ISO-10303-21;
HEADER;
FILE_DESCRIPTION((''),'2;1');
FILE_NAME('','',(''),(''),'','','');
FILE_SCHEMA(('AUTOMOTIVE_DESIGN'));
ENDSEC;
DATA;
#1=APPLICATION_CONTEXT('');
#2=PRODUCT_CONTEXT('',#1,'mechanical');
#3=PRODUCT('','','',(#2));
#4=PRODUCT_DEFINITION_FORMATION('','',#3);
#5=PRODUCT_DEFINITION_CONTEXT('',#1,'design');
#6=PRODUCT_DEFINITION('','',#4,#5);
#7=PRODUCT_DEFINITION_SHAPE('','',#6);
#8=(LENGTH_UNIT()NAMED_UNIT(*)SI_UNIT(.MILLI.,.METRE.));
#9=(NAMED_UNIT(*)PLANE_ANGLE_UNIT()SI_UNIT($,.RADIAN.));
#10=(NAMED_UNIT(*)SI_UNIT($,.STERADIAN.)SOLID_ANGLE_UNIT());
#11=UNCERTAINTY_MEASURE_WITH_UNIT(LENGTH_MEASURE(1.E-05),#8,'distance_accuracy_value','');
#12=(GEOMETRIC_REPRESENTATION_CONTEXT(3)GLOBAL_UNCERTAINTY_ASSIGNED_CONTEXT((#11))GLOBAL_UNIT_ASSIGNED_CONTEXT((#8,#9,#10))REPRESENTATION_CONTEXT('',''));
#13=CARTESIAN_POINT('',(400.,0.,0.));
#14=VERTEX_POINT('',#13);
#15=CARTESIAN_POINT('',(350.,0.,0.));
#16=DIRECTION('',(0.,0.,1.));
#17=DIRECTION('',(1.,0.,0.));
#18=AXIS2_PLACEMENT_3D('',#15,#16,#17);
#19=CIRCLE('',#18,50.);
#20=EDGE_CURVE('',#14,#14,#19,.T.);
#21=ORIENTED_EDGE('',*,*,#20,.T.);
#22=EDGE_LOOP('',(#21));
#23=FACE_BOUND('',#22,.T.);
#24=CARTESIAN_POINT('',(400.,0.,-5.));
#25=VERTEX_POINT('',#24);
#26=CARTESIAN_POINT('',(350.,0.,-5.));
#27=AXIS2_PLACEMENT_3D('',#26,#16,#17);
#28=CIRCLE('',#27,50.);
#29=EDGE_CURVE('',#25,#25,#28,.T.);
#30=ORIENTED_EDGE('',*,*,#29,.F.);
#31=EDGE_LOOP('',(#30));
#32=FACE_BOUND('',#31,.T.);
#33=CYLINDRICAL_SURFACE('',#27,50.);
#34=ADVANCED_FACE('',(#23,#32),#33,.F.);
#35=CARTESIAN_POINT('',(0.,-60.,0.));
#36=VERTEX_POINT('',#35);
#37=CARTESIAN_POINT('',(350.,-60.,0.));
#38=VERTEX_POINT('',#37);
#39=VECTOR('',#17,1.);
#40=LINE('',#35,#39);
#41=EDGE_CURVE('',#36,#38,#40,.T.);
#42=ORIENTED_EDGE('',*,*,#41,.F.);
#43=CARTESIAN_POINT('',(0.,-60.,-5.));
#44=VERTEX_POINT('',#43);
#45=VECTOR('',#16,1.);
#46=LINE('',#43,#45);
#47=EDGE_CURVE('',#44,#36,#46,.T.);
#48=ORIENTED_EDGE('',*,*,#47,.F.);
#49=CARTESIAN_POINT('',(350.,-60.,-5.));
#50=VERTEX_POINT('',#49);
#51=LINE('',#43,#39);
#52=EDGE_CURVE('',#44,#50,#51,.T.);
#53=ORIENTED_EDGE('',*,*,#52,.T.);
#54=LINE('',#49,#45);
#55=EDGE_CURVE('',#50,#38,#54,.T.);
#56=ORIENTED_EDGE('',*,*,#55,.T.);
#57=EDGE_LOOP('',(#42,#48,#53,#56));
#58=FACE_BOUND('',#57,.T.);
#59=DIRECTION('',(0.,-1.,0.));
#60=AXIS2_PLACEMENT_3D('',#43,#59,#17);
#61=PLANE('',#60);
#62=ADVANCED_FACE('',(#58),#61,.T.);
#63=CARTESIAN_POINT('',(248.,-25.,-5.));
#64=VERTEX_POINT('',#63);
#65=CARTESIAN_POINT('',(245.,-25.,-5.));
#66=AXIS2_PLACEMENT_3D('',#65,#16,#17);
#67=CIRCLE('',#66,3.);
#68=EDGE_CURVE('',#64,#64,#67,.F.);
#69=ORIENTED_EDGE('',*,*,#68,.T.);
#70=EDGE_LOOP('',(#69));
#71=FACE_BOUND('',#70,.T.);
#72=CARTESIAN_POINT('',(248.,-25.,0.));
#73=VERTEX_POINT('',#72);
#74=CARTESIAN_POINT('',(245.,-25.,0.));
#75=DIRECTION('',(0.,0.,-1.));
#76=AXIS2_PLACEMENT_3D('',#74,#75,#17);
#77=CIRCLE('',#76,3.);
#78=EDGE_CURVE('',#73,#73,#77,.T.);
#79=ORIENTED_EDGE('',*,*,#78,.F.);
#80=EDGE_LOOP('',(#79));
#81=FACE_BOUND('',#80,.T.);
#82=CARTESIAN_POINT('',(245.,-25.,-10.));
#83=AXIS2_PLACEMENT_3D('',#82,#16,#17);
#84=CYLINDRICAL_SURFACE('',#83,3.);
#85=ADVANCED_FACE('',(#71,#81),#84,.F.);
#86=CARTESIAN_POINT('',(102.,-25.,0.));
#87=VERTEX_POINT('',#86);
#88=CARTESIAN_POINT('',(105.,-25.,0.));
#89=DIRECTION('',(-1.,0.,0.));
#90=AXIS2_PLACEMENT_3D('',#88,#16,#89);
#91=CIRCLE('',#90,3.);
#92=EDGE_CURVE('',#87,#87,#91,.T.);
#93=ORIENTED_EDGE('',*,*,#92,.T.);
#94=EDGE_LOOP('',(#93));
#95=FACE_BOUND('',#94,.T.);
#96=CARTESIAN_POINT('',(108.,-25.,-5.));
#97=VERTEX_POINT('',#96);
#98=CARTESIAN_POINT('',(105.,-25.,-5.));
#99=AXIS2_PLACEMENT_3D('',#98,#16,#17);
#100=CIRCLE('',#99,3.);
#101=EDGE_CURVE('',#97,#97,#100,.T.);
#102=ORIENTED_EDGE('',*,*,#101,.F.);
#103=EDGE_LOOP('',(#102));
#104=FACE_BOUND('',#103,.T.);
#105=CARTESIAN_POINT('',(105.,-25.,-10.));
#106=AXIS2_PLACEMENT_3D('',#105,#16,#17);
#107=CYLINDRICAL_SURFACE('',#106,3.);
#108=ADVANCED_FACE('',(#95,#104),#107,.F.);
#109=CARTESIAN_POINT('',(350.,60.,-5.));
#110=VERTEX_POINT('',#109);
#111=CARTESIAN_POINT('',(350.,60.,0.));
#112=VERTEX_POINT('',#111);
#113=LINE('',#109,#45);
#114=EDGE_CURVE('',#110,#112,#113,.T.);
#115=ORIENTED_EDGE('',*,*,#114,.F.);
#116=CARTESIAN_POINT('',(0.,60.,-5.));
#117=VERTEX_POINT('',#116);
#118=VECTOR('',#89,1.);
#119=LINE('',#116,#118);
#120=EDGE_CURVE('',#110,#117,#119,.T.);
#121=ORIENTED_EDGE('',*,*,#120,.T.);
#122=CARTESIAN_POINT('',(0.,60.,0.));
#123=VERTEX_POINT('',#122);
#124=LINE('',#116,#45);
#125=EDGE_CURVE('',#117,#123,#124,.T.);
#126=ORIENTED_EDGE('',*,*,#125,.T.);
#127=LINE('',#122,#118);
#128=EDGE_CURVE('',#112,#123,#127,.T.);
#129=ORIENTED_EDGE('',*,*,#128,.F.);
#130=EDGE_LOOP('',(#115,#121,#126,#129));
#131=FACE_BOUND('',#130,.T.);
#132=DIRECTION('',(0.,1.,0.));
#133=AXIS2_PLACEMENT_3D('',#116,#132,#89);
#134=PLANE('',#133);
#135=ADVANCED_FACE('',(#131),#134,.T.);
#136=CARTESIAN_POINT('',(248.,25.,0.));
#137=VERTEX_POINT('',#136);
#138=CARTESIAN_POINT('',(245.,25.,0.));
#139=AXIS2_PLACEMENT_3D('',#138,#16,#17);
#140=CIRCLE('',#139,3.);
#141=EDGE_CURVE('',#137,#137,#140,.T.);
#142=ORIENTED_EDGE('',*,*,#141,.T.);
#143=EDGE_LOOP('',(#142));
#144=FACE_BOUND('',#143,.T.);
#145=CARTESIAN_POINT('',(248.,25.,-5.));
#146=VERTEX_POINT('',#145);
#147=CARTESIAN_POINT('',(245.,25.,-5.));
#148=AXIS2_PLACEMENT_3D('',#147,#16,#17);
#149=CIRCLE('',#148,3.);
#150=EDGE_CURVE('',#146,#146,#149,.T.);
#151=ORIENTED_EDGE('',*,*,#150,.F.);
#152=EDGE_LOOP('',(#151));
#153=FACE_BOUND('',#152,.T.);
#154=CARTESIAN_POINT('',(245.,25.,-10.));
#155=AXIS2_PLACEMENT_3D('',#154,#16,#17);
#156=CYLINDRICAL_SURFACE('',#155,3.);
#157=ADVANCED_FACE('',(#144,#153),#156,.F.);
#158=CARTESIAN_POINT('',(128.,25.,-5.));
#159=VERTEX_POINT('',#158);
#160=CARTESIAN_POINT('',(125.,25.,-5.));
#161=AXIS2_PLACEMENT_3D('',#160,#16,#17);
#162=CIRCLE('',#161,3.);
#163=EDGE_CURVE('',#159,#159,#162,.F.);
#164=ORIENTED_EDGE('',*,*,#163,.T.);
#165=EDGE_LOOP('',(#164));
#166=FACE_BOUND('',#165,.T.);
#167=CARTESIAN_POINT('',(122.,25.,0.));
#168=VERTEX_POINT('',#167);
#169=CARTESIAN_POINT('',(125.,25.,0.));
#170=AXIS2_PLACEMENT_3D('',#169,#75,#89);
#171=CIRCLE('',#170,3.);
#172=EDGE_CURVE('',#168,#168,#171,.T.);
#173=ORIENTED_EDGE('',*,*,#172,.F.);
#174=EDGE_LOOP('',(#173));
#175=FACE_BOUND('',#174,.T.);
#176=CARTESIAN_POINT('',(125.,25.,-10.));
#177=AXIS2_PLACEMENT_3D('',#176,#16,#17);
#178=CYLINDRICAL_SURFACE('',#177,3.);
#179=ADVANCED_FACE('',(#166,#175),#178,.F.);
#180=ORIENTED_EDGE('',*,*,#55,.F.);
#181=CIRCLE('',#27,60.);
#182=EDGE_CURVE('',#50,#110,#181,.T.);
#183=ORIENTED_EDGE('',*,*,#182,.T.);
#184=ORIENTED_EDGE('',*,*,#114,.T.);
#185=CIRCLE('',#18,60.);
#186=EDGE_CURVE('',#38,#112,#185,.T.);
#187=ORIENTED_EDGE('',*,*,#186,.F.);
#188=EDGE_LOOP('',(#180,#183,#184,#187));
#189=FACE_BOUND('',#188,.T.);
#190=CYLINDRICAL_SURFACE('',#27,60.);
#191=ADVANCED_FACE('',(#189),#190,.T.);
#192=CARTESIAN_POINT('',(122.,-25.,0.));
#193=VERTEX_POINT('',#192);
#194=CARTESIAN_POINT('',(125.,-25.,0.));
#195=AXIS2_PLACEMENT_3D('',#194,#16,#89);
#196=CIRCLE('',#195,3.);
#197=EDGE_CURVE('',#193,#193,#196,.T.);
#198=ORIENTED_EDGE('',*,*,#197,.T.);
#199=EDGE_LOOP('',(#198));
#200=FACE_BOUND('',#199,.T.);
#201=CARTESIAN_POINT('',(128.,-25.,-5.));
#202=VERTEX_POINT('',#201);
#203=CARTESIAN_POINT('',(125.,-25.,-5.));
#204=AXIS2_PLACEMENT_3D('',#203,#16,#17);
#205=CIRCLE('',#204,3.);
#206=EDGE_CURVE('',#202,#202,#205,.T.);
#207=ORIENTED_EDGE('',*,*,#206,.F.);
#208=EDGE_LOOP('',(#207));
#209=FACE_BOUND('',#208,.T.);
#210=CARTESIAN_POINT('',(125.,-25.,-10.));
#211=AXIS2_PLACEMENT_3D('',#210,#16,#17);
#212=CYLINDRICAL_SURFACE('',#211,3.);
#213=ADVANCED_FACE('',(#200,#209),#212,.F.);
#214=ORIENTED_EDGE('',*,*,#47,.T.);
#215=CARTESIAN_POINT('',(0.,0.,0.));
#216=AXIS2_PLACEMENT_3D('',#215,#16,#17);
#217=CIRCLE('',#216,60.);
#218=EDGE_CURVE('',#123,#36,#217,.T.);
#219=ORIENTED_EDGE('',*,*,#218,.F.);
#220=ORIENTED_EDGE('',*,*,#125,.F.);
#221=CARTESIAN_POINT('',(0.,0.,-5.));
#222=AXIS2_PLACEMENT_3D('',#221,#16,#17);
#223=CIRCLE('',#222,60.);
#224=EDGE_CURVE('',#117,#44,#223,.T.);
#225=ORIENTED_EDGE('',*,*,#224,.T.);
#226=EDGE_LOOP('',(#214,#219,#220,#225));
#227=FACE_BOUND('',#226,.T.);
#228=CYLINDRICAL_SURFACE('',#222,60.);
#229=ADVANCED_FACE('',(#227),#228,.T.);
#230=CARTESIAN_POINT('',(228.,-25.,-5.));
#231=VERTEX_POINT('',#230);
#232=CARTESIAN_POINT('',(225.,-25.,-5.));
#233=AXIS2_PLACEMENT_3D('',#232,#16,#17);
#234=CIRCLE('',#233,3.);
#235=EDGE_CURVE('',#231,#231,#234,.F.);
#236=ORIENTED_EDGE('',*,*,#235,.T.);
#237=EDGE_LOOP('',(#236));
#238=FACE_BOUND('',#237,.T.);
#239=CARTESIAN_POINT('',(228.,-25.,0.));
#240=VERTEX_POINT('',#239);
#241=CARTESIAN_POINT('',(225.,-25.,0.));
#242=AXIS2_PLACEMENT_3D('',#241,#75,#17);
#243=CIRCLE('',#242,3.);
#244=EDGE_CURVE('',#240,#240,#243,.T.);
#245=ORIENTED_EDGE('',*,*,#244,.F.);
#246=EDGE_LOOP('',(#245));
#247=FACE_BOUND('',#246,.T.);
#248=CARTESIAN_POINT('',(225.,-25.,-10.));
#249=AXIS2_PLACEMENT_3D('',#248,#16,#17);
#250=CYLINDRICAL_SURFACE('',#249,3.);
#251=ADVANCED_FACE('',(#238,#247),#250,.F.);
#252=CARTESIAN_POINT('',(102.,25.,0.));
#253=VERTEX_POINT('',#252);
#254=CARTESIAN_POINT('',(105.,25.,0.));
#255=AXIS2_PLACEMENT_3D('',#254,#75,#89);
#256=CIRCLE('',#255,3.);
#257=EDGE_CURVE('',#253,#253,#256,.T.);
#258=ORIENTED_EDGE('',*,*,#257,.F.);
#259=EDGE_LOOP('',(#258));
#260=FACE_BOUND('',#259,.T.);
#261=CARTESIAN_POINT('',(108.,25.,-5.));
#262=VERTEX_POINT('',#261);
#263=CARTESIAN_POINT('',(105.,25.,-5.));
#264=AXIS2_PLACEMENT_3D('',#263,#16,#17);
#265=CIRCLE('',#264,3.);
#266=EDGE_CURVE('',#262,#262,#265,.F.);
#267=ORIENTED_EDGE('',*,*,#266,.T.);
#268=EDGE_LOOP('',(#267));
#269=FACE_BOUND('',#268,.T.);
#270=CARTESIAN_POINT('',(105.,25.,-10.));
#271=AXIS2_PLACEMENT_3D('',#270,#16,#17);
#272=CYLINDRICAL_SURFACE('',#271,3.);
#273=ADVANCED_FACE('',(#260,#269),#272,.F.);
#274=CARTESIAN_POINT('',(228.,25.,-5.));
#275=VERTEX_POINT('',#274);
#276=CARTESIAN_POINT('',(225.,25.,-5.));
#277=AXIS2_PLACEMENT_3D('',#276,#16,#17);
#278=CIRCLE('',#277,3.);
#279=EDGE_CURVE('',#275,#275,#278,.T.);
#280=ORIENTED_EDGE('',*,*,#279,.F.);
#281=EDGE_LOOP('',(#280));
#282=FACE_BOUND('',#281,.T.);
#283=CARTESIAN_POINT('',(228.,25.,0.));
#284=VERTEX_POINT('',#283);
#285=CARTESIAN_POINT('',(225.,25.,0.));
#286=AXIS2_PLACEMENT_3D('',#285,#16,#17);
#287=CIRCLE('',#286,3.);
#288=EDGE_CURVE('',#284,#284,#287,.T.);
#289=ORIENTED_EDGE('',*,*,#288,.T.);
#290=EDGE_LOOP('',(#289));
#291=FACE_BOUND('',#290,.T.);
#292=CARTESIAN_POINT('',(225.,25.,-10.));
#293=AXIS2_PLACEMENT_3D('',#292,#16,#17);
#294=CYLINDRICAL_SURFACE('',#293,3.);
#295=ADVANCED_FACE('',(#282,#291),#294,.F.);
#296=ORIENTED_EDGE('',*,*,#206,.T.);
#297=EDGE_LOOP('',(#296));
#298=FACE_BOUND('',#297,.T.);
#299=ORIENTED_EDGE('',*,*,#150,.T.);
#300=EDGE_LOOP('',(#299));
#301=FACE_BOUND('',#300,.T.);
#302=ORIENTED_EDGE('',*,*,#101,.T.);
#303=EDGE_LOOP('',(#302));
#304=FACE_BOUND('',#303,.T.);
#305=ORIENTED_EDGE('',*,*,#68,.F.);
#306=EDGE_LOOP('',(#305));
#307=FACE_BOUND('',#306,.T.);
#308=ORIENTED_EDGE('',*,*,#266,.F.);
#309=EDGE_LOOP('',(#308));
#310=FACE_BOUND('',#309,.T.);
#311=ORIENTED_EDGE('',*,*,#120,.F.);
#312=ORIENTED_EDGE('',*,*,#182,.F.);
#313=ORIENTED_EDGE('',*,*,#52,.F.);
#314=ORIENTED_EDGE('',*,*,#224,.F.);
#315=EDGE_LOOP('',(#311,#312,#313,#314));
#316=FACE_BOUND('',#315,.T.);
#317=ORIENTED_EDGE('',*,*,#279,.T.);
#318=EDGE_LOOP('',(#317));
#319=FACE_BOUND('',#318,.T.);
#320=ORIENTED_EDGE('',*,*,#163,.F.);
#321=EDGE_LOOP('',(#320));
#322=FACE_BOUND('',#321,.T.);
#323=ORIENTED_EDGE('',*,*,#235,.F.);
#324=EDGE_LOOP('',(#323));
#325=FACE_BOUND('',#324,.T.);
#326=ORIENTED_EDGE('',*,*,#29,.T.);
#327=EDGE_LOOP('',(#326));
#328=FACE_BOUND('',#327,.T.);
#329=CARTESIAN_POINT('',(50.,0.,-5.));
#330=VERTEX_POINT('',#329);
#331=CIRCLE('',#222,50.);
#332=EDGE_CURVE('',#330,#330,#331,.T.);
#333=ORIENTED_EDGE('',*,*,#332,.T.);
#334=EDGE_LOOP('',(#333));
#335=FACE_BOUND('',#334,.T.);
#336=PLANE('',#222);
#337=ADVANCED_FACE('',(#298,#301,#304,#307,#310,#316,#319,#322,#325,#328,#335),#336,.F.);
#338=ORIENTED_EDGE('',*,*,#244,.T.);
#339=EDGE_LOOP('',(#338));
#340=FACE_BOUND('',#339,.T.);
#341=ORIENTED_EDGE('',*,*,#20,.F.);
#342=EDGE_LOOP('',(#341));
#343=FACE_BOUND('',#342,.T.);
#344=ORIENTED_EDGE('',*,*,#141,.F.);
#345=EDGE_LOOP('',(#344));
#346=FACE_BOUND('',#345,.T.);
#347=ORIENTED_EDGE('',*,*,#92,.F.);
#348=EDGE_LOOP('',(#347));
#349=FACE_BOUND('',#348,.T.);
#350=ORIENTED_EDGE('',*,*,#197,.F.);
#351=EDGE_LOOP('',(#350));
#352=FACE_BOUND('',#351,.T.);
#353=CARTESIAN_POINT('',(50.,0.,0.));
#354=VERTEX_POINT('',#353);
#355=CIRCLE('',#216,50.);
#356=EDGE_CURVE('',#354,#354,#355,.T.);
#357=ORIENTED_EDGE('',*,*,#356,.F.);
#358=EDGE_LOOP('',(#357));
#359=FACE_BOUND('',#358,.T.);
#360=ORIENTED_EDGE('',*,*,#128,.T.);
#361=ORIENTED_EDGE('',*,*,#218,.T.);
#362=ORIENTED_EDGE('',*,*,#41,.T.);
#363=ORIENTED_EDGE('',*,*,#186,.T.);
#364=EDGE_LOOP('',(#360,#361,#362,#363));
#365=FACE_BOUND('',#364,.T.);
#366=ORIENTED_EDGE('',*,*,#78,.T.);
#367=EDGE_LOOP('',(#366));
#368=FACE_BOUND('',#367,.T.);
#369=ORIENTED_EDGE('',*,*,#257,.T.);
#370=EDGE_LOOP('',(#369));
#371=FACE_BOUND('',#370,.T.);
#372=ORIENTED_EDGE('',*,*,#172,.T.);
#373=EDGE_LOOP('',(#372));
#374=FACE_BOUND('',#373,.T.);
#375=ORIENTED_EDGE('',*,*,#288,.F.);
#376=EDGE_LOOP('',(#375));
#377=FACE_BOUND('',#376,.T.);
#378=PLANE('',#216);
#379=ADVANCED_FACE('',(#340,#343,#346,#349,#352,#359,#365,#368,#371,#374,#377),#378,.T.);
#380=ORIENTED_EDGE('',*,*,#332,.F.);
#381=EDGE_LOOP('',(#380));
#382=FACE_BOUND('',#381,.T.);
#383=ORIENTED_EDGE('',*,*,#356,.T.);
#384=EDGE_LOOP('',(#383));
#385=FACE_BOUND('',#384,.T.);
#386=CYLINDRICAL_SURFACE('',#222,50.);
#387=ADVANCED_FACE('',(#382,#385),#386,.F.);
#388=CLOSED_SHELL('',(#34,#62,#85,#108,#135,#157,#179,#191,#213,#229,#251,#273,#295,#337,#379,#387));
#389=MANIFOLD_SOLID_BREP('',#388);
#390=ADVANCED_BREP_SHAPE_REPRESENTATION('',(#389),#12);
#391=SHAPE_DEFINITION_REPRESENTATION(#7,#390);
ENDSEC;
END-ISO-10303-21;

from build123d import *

# Parameters (mm, degrees)
SKETCH_2_R               = 50
SM_BASE_FLANGE_1_DEPTH   = 5
SKETCH_3_R               = 3
CUT_EXTRUDE_1_DEPTH      = 10
MIRROR_2_COPY_1_SKETCH_R = 3
MIRROR_2_COPY_1_DEPTH    = 10


# Sheet-metal steps are written as plain solids
with BuildPart() as part:
    # Sketch 2 → 基体-法兰1 (new body)
    with BuildSketch(Plane.XY):
        with BuildLine():
            Line((0, 60), (350, 60))
            ThreePointArc((350, 60), (410, 0), (350, -60))
            Line((350, -60), (0, -60))
            ThreePointArc((0, -60), (-60, 0), (0, 60))
        make_face()
        Circle(SKETCH_2_R, mode=Mode.SUBTRACT)
        with Locations((350, 0)):
            Circle(SKETCH_2_R, mode=Mode.SUBTRACT)
    extrude(amount=-SM_BASE_FLANGE_1_DEPTH)

    # 草图3 → 切除-拉伸1 (cut)
    with BuildSketch(Plane.XY):
        with Locations((225, 25)):
            Circle(SKETCH_3_R)
        with Locations((245, 25)):
            Circle(SKETCH_3_R)
    cut_extrude_1 = extrude(amount=-CUT_EXTRUDE_1_DEPTH, mode=Mode.SUBTRACT)

    # 镜向1: 切除-拉伸1 across plane
    add(cut_extrude_1.mirror(Plane.ZX), mode=Mode.SUBTRACT)

    # 镜向2: 切除-拉伸1 across plane
    add(cut_extrude_1.mirror(Plane(origin=(175, 0, 0), x_dir=(0, 0, 1), z_dir=(1, 0, 0))), mode=Mode.SUBTRACT)

    # 镜向2 copy 1 sketch → 镜向2 copy 1 (cut)
    with BuildSketch(Plane(origin=(350, 0, 0), x_dir=(-1, 0, 0), z_dir=(0, 0, 1))):
        with Locations((225, 25)):
            Circle(MIRROR_2_COPY_1_SKETCH_R)
        with Locations((245, 25)):
            Circle(MIRROR_2_COPY_1_SKETCH_R)
    extrude(amount=-MIRROR_2_COPY_1_DEPTH, mode=Mode.SUBTRACT)


solid = part.part
